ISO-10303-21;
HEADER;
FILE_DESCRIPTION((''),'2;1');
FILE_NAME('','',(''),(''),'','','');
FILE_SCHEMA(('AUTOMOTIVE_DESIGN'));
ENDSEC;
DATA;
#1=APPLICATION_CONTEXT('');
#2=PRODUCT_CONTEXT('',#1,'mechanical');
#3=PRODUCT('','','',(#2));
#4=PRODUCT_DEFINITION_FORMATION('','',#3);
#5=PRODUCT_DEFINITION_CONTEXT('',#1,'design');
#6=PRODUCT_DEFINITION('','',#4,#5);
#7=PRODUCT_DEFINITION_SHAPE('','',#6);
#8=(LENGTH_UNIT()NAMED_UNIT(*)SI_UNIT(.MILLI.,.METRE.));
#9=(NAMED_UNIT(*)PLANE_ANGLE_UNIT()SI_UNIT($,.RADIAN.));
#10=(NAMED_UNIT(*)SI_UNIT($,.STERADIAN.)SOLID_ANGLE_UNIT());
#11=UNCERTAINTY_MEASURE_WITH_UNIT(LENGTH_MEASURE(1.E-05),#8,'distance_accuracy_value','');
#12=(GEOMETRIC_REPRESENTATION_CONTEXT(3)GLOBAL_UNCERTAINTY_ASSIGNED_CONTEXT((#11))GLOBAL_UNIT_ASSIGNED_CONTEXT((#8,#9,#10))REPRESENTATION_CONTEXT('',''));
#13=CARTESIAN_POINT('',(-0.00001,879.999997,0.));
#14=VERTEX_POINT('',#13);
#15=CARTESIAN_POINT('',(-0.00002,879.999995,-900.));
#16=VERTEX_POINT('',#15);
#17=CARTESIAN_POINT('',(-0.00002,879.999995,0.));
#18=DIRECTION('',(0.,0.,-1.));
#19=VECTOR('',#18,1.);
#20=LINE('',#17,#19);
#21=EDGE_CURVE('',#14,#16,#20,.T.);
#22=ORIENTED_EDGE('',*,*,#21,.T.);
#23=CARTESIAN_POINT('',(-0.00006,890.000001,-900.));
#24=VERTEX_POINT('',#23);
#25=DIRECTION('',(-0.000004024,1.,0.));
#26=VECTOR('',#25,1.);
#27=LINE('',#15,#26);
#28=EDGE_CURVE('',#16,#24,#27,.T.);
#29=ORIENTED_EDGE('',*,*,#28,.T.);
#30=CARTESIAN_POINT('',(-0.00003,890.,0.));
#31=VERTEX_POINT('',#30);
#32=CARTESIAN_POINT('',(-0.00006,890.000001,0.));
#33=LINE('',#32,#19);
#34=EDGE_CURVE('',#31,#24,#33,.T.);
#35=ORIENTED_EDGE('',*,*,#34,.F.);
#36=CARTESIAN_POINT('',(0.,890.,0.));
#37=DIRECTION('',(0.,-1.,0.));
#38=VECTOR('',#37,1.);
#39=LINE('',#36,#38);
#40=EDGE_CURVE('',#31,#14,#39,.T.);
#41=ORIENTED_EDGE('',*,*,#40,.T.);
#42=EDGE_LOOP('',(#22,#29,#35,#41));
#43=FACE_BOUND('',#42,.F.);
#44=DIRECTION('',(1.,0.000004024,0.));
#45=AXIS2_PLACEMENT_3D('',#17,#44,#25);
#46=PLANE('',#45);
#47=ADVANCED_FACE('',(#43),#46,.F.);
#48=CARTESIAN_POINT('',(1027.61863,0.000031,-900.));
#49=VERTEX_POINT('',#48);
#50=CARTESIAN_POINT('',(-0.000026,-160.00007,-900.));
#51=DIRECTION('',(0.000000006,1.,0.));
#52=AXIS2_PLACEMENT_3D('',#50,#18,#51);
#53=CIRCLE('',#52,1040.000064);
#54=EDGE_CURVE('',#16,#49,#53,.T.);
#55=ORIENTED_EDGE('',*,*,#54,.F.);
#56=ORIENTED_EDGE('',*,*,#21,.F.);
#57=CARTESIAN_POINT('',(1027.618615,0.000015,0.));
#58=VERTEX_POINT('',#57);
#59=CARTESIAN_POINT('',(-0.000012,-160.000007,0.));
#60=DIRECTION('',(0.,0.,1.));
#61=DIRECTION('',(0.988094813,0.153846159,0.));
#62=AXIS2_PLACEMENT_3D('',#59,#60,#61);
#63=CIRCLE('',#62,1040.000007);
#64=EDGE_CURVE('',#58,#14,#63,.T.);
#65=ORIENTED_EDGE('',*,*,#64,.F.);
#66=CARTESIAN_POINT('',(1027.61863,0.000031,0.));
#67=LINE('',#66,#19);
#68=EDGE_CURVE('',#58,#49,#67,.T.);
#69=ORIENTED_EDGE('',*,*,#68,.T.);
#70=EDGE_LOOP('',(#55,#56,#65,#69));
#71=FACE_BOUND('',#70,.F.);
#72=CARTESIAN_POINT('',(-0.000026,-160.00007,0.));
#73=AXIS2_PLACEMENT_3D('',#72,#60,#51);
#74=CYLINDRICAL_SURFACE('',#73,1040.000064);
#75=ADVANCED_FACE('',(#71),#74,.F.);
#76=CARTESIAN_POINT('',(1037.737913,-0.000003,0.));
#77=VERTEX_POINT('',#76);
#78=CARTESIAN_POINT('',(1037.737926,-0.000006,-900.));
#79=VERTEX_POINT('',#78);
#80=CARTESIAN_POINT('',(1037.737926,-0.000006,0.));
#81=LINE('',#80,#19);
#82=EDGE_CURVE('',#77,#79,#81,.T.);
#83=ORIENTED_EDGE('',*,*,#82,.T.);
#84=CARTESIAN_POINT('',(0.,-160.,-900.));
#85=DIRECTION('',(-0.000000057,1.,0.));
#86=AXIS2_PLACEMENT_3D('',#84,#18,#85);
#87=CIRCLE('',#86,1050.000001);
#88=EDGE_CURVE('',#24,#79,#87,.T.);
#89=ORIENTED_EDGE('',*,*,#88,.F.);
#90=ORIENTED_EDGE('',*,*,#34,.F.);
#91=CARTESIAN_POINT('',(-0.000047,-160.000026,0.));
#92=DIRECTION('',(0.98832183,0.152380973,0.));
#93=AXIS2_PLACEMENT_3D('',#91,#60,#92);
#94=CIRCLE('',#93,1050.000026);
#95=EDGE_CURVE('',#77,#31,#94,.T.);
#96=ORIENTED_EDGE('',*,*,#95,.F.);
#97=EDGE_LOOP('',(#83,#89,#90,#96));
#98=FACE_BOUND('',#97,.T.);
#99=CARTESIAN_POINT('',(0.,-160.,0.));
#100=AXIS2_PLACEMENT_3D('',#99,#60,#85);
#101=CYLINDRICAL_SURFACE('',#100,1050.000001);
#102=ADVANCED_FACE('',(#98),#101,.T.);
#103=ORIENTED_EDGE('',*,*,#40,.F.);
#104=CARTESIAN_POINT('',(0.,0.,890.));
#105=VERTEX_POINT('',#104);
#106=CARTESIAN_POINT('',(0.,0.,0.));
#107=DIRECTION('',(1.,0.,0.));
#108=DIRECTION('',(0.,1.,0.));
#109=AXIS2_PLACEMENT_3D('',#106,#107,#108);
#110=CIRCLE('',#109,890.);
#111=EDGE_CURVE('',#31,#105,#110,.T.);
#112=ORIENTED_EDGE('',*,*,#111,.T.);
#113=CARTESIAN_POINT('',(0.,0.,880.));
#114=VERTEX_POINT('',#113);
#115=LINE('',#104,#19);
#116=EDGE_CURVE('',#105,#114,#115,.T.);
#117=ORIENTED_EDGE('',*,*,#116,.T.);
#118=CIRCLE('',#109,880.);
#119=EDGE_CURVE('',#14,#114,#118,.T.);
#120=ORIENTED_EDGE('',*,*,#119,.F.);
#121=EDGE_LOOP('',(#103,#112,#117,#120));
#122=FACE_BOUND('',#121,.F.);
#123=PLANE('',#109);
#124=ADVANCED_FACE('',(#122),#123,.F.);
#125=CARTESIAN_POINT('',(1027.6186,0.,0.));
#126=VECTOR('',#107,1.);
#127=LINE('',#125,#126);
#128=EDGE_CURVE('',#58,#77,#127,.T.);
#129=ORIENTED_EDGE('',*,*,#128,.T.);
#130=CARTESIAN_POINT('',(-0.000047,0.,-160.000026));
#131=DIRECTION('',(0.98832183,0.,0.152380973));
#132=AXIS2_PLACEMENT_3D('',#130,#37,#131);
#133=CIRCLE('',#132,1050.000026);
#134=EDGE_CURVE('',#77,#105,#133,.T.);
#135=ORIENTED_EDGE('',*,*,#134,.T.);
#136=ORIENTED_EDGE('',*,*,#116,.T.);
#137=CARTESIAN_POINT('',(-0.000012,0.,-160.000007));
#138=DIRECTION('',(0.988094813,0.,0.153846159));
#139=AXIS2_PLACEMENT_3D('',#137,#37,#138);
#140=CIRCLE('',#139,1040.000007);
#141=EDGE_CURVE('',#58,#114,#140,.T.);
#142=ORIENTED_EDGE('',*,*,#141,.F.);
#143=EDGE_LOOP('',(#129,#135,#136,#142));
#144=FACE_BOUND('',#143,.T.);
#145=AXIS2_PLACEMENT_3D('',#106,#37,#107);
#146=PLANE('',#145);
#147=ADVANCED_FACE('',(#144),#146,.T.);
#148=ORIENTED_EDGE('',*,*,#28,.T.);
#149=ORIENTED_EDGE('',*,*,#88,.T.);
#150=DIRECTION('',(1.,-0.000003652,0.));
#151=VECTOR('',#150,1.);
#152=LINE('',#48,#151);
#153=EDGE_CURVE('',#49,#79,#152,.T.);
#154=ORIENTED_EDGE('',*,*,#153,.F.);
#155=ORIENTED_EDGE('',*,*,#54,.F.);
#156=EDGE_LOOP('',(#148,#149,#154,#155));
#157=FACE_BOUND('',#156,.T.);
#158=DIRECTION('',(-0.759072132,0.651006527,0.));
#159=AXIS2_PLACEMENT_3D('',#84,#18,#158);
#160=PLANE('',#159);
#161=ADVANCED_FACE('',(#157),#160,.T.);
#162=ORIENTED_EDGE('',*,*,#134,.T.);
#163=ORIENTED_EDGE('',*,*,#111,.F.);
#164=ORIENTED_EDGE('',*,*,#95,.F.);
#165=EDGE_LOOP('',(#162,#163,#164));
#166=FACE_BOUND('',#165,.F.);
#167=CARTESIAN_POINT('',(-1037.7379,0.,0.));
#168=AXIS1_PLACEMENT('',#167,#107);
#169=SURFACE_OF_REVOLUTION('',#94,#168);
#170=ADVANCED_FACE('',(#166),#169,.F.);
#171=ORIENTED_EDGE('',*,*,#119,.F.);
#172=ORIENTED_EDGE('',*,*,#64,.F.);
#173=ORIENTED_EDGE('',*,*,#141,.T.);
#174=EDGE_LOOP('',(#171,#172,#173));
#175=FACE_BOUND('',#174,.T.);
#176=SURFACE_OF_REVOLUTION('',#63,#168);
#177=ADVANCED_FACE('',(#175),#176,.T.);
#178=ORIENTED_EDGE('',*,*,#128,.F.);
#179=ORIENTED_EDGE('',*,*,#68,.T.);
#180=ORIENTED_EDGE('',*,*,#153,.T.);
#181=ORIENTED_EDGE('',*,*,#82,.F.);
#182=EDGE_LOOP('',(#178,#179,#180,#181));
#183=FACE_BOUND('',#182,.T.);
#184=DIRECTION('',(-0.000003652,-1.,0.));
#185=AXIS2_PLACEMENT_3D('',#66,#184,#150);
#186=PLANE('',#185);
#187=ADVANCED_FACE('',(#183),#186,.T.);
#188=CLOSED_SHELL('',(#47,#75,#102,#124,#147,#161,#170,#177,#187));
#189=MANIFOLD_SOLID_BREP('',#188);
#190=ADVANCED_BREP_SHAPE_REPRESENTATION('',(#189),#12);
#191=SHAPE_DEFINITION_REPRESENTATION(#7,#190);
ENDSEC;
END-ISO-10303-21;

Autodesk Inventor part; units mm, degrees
ref_plane "XZ Plane" through (0, 0, 0) normal (0, 1, 0) x (-1, 0, 0)
sketch "Sketch1" plane through (0, 0, 0) normal (0, 0, 1) x (1, 0, 0)
  arc A0 (0, 890) -> (-1037.7379, 0) centre (0, -160) ccw
  arc A1 (1037.7379, 0) -> (0, 890) centre (0, -160) ccw
  arc A2 (0, 880) -> (-1027.6186, 0) centre (0, -160) ccw
  arc A3 (1027.6186, 0) -> (0, 880) centre (0, -160) ccw
  line L0 (1027.6186, 0) -> (1037.7379, 0)
  line L1 (-1037.7379, 0) -> (-1027.6186, 0)
  point P0 (0, 0)
  dimension "d0" = 0
  dimension "d1" = 0
  dimension "d2" = 0
  dimension "d3" = 160
  dimension "d6" = 890
  dimension "d8" = 1037.7379
  dimension "d10" = 0
  dimension "d11" = 10
  dimension "d12" = 0
revolve "Revolution2" add sketch "Sketch1" angle 90 about axis through (1027.6186, 0, 0) along (1, 0, 0)
ref_plane "end1" through (-1037.7379, 0, 0) normal (1, 0, 0) x (0, 1, 0)
sketch "Sketch3" plane through (-1037.7379, 0, 0) normal (1, 0, 0) x (0, 1, 0)
  line L0 (890, 0) -> (0, 0) projected
  line L1 (0, 890) -> (0, 0) projected
  line L2 (890, 0) -> (0, 0)
  line L3 (0, 0) -> (0, 890)
  line L4 (0, 890) -> (890, 890)
  line L5 (890, 890) -> (890, 0)
extrude "Extrusion1" cut sketch "Sketch3" along normal blind 1037.7379
ref_plane "end2" through (1037.7379, 0, 0) normal (1, 0, 0) x (0, 1, 0)
sketch "Sketch4" plane through (0, -160, 0) normal (0, 0, -1) x (-0.7590721, 0.6510065, 0)
  arc A0 (683.5569, 797.0257) -> (-683.5569, 797.0257) centre (0, 0) ccw projected
  arc A1 (677.0468, 789.435) -> (-675.8756, 790.438) centre (0, 0) ccw projected
  line L0 (677.0468, 789.435) -> (683.5569, 797.0257) projected
  line L1 (-675.8756, 790.438) -> (-683.5569, 797.0257) projected
  point P0 (104.161, 121.4515)
extrude "Extrusion2" add sketch "Sketch4" along normal blind 900
equation "\"d14\" = d8"
properties part number "cover2_sule_inner_extended"
